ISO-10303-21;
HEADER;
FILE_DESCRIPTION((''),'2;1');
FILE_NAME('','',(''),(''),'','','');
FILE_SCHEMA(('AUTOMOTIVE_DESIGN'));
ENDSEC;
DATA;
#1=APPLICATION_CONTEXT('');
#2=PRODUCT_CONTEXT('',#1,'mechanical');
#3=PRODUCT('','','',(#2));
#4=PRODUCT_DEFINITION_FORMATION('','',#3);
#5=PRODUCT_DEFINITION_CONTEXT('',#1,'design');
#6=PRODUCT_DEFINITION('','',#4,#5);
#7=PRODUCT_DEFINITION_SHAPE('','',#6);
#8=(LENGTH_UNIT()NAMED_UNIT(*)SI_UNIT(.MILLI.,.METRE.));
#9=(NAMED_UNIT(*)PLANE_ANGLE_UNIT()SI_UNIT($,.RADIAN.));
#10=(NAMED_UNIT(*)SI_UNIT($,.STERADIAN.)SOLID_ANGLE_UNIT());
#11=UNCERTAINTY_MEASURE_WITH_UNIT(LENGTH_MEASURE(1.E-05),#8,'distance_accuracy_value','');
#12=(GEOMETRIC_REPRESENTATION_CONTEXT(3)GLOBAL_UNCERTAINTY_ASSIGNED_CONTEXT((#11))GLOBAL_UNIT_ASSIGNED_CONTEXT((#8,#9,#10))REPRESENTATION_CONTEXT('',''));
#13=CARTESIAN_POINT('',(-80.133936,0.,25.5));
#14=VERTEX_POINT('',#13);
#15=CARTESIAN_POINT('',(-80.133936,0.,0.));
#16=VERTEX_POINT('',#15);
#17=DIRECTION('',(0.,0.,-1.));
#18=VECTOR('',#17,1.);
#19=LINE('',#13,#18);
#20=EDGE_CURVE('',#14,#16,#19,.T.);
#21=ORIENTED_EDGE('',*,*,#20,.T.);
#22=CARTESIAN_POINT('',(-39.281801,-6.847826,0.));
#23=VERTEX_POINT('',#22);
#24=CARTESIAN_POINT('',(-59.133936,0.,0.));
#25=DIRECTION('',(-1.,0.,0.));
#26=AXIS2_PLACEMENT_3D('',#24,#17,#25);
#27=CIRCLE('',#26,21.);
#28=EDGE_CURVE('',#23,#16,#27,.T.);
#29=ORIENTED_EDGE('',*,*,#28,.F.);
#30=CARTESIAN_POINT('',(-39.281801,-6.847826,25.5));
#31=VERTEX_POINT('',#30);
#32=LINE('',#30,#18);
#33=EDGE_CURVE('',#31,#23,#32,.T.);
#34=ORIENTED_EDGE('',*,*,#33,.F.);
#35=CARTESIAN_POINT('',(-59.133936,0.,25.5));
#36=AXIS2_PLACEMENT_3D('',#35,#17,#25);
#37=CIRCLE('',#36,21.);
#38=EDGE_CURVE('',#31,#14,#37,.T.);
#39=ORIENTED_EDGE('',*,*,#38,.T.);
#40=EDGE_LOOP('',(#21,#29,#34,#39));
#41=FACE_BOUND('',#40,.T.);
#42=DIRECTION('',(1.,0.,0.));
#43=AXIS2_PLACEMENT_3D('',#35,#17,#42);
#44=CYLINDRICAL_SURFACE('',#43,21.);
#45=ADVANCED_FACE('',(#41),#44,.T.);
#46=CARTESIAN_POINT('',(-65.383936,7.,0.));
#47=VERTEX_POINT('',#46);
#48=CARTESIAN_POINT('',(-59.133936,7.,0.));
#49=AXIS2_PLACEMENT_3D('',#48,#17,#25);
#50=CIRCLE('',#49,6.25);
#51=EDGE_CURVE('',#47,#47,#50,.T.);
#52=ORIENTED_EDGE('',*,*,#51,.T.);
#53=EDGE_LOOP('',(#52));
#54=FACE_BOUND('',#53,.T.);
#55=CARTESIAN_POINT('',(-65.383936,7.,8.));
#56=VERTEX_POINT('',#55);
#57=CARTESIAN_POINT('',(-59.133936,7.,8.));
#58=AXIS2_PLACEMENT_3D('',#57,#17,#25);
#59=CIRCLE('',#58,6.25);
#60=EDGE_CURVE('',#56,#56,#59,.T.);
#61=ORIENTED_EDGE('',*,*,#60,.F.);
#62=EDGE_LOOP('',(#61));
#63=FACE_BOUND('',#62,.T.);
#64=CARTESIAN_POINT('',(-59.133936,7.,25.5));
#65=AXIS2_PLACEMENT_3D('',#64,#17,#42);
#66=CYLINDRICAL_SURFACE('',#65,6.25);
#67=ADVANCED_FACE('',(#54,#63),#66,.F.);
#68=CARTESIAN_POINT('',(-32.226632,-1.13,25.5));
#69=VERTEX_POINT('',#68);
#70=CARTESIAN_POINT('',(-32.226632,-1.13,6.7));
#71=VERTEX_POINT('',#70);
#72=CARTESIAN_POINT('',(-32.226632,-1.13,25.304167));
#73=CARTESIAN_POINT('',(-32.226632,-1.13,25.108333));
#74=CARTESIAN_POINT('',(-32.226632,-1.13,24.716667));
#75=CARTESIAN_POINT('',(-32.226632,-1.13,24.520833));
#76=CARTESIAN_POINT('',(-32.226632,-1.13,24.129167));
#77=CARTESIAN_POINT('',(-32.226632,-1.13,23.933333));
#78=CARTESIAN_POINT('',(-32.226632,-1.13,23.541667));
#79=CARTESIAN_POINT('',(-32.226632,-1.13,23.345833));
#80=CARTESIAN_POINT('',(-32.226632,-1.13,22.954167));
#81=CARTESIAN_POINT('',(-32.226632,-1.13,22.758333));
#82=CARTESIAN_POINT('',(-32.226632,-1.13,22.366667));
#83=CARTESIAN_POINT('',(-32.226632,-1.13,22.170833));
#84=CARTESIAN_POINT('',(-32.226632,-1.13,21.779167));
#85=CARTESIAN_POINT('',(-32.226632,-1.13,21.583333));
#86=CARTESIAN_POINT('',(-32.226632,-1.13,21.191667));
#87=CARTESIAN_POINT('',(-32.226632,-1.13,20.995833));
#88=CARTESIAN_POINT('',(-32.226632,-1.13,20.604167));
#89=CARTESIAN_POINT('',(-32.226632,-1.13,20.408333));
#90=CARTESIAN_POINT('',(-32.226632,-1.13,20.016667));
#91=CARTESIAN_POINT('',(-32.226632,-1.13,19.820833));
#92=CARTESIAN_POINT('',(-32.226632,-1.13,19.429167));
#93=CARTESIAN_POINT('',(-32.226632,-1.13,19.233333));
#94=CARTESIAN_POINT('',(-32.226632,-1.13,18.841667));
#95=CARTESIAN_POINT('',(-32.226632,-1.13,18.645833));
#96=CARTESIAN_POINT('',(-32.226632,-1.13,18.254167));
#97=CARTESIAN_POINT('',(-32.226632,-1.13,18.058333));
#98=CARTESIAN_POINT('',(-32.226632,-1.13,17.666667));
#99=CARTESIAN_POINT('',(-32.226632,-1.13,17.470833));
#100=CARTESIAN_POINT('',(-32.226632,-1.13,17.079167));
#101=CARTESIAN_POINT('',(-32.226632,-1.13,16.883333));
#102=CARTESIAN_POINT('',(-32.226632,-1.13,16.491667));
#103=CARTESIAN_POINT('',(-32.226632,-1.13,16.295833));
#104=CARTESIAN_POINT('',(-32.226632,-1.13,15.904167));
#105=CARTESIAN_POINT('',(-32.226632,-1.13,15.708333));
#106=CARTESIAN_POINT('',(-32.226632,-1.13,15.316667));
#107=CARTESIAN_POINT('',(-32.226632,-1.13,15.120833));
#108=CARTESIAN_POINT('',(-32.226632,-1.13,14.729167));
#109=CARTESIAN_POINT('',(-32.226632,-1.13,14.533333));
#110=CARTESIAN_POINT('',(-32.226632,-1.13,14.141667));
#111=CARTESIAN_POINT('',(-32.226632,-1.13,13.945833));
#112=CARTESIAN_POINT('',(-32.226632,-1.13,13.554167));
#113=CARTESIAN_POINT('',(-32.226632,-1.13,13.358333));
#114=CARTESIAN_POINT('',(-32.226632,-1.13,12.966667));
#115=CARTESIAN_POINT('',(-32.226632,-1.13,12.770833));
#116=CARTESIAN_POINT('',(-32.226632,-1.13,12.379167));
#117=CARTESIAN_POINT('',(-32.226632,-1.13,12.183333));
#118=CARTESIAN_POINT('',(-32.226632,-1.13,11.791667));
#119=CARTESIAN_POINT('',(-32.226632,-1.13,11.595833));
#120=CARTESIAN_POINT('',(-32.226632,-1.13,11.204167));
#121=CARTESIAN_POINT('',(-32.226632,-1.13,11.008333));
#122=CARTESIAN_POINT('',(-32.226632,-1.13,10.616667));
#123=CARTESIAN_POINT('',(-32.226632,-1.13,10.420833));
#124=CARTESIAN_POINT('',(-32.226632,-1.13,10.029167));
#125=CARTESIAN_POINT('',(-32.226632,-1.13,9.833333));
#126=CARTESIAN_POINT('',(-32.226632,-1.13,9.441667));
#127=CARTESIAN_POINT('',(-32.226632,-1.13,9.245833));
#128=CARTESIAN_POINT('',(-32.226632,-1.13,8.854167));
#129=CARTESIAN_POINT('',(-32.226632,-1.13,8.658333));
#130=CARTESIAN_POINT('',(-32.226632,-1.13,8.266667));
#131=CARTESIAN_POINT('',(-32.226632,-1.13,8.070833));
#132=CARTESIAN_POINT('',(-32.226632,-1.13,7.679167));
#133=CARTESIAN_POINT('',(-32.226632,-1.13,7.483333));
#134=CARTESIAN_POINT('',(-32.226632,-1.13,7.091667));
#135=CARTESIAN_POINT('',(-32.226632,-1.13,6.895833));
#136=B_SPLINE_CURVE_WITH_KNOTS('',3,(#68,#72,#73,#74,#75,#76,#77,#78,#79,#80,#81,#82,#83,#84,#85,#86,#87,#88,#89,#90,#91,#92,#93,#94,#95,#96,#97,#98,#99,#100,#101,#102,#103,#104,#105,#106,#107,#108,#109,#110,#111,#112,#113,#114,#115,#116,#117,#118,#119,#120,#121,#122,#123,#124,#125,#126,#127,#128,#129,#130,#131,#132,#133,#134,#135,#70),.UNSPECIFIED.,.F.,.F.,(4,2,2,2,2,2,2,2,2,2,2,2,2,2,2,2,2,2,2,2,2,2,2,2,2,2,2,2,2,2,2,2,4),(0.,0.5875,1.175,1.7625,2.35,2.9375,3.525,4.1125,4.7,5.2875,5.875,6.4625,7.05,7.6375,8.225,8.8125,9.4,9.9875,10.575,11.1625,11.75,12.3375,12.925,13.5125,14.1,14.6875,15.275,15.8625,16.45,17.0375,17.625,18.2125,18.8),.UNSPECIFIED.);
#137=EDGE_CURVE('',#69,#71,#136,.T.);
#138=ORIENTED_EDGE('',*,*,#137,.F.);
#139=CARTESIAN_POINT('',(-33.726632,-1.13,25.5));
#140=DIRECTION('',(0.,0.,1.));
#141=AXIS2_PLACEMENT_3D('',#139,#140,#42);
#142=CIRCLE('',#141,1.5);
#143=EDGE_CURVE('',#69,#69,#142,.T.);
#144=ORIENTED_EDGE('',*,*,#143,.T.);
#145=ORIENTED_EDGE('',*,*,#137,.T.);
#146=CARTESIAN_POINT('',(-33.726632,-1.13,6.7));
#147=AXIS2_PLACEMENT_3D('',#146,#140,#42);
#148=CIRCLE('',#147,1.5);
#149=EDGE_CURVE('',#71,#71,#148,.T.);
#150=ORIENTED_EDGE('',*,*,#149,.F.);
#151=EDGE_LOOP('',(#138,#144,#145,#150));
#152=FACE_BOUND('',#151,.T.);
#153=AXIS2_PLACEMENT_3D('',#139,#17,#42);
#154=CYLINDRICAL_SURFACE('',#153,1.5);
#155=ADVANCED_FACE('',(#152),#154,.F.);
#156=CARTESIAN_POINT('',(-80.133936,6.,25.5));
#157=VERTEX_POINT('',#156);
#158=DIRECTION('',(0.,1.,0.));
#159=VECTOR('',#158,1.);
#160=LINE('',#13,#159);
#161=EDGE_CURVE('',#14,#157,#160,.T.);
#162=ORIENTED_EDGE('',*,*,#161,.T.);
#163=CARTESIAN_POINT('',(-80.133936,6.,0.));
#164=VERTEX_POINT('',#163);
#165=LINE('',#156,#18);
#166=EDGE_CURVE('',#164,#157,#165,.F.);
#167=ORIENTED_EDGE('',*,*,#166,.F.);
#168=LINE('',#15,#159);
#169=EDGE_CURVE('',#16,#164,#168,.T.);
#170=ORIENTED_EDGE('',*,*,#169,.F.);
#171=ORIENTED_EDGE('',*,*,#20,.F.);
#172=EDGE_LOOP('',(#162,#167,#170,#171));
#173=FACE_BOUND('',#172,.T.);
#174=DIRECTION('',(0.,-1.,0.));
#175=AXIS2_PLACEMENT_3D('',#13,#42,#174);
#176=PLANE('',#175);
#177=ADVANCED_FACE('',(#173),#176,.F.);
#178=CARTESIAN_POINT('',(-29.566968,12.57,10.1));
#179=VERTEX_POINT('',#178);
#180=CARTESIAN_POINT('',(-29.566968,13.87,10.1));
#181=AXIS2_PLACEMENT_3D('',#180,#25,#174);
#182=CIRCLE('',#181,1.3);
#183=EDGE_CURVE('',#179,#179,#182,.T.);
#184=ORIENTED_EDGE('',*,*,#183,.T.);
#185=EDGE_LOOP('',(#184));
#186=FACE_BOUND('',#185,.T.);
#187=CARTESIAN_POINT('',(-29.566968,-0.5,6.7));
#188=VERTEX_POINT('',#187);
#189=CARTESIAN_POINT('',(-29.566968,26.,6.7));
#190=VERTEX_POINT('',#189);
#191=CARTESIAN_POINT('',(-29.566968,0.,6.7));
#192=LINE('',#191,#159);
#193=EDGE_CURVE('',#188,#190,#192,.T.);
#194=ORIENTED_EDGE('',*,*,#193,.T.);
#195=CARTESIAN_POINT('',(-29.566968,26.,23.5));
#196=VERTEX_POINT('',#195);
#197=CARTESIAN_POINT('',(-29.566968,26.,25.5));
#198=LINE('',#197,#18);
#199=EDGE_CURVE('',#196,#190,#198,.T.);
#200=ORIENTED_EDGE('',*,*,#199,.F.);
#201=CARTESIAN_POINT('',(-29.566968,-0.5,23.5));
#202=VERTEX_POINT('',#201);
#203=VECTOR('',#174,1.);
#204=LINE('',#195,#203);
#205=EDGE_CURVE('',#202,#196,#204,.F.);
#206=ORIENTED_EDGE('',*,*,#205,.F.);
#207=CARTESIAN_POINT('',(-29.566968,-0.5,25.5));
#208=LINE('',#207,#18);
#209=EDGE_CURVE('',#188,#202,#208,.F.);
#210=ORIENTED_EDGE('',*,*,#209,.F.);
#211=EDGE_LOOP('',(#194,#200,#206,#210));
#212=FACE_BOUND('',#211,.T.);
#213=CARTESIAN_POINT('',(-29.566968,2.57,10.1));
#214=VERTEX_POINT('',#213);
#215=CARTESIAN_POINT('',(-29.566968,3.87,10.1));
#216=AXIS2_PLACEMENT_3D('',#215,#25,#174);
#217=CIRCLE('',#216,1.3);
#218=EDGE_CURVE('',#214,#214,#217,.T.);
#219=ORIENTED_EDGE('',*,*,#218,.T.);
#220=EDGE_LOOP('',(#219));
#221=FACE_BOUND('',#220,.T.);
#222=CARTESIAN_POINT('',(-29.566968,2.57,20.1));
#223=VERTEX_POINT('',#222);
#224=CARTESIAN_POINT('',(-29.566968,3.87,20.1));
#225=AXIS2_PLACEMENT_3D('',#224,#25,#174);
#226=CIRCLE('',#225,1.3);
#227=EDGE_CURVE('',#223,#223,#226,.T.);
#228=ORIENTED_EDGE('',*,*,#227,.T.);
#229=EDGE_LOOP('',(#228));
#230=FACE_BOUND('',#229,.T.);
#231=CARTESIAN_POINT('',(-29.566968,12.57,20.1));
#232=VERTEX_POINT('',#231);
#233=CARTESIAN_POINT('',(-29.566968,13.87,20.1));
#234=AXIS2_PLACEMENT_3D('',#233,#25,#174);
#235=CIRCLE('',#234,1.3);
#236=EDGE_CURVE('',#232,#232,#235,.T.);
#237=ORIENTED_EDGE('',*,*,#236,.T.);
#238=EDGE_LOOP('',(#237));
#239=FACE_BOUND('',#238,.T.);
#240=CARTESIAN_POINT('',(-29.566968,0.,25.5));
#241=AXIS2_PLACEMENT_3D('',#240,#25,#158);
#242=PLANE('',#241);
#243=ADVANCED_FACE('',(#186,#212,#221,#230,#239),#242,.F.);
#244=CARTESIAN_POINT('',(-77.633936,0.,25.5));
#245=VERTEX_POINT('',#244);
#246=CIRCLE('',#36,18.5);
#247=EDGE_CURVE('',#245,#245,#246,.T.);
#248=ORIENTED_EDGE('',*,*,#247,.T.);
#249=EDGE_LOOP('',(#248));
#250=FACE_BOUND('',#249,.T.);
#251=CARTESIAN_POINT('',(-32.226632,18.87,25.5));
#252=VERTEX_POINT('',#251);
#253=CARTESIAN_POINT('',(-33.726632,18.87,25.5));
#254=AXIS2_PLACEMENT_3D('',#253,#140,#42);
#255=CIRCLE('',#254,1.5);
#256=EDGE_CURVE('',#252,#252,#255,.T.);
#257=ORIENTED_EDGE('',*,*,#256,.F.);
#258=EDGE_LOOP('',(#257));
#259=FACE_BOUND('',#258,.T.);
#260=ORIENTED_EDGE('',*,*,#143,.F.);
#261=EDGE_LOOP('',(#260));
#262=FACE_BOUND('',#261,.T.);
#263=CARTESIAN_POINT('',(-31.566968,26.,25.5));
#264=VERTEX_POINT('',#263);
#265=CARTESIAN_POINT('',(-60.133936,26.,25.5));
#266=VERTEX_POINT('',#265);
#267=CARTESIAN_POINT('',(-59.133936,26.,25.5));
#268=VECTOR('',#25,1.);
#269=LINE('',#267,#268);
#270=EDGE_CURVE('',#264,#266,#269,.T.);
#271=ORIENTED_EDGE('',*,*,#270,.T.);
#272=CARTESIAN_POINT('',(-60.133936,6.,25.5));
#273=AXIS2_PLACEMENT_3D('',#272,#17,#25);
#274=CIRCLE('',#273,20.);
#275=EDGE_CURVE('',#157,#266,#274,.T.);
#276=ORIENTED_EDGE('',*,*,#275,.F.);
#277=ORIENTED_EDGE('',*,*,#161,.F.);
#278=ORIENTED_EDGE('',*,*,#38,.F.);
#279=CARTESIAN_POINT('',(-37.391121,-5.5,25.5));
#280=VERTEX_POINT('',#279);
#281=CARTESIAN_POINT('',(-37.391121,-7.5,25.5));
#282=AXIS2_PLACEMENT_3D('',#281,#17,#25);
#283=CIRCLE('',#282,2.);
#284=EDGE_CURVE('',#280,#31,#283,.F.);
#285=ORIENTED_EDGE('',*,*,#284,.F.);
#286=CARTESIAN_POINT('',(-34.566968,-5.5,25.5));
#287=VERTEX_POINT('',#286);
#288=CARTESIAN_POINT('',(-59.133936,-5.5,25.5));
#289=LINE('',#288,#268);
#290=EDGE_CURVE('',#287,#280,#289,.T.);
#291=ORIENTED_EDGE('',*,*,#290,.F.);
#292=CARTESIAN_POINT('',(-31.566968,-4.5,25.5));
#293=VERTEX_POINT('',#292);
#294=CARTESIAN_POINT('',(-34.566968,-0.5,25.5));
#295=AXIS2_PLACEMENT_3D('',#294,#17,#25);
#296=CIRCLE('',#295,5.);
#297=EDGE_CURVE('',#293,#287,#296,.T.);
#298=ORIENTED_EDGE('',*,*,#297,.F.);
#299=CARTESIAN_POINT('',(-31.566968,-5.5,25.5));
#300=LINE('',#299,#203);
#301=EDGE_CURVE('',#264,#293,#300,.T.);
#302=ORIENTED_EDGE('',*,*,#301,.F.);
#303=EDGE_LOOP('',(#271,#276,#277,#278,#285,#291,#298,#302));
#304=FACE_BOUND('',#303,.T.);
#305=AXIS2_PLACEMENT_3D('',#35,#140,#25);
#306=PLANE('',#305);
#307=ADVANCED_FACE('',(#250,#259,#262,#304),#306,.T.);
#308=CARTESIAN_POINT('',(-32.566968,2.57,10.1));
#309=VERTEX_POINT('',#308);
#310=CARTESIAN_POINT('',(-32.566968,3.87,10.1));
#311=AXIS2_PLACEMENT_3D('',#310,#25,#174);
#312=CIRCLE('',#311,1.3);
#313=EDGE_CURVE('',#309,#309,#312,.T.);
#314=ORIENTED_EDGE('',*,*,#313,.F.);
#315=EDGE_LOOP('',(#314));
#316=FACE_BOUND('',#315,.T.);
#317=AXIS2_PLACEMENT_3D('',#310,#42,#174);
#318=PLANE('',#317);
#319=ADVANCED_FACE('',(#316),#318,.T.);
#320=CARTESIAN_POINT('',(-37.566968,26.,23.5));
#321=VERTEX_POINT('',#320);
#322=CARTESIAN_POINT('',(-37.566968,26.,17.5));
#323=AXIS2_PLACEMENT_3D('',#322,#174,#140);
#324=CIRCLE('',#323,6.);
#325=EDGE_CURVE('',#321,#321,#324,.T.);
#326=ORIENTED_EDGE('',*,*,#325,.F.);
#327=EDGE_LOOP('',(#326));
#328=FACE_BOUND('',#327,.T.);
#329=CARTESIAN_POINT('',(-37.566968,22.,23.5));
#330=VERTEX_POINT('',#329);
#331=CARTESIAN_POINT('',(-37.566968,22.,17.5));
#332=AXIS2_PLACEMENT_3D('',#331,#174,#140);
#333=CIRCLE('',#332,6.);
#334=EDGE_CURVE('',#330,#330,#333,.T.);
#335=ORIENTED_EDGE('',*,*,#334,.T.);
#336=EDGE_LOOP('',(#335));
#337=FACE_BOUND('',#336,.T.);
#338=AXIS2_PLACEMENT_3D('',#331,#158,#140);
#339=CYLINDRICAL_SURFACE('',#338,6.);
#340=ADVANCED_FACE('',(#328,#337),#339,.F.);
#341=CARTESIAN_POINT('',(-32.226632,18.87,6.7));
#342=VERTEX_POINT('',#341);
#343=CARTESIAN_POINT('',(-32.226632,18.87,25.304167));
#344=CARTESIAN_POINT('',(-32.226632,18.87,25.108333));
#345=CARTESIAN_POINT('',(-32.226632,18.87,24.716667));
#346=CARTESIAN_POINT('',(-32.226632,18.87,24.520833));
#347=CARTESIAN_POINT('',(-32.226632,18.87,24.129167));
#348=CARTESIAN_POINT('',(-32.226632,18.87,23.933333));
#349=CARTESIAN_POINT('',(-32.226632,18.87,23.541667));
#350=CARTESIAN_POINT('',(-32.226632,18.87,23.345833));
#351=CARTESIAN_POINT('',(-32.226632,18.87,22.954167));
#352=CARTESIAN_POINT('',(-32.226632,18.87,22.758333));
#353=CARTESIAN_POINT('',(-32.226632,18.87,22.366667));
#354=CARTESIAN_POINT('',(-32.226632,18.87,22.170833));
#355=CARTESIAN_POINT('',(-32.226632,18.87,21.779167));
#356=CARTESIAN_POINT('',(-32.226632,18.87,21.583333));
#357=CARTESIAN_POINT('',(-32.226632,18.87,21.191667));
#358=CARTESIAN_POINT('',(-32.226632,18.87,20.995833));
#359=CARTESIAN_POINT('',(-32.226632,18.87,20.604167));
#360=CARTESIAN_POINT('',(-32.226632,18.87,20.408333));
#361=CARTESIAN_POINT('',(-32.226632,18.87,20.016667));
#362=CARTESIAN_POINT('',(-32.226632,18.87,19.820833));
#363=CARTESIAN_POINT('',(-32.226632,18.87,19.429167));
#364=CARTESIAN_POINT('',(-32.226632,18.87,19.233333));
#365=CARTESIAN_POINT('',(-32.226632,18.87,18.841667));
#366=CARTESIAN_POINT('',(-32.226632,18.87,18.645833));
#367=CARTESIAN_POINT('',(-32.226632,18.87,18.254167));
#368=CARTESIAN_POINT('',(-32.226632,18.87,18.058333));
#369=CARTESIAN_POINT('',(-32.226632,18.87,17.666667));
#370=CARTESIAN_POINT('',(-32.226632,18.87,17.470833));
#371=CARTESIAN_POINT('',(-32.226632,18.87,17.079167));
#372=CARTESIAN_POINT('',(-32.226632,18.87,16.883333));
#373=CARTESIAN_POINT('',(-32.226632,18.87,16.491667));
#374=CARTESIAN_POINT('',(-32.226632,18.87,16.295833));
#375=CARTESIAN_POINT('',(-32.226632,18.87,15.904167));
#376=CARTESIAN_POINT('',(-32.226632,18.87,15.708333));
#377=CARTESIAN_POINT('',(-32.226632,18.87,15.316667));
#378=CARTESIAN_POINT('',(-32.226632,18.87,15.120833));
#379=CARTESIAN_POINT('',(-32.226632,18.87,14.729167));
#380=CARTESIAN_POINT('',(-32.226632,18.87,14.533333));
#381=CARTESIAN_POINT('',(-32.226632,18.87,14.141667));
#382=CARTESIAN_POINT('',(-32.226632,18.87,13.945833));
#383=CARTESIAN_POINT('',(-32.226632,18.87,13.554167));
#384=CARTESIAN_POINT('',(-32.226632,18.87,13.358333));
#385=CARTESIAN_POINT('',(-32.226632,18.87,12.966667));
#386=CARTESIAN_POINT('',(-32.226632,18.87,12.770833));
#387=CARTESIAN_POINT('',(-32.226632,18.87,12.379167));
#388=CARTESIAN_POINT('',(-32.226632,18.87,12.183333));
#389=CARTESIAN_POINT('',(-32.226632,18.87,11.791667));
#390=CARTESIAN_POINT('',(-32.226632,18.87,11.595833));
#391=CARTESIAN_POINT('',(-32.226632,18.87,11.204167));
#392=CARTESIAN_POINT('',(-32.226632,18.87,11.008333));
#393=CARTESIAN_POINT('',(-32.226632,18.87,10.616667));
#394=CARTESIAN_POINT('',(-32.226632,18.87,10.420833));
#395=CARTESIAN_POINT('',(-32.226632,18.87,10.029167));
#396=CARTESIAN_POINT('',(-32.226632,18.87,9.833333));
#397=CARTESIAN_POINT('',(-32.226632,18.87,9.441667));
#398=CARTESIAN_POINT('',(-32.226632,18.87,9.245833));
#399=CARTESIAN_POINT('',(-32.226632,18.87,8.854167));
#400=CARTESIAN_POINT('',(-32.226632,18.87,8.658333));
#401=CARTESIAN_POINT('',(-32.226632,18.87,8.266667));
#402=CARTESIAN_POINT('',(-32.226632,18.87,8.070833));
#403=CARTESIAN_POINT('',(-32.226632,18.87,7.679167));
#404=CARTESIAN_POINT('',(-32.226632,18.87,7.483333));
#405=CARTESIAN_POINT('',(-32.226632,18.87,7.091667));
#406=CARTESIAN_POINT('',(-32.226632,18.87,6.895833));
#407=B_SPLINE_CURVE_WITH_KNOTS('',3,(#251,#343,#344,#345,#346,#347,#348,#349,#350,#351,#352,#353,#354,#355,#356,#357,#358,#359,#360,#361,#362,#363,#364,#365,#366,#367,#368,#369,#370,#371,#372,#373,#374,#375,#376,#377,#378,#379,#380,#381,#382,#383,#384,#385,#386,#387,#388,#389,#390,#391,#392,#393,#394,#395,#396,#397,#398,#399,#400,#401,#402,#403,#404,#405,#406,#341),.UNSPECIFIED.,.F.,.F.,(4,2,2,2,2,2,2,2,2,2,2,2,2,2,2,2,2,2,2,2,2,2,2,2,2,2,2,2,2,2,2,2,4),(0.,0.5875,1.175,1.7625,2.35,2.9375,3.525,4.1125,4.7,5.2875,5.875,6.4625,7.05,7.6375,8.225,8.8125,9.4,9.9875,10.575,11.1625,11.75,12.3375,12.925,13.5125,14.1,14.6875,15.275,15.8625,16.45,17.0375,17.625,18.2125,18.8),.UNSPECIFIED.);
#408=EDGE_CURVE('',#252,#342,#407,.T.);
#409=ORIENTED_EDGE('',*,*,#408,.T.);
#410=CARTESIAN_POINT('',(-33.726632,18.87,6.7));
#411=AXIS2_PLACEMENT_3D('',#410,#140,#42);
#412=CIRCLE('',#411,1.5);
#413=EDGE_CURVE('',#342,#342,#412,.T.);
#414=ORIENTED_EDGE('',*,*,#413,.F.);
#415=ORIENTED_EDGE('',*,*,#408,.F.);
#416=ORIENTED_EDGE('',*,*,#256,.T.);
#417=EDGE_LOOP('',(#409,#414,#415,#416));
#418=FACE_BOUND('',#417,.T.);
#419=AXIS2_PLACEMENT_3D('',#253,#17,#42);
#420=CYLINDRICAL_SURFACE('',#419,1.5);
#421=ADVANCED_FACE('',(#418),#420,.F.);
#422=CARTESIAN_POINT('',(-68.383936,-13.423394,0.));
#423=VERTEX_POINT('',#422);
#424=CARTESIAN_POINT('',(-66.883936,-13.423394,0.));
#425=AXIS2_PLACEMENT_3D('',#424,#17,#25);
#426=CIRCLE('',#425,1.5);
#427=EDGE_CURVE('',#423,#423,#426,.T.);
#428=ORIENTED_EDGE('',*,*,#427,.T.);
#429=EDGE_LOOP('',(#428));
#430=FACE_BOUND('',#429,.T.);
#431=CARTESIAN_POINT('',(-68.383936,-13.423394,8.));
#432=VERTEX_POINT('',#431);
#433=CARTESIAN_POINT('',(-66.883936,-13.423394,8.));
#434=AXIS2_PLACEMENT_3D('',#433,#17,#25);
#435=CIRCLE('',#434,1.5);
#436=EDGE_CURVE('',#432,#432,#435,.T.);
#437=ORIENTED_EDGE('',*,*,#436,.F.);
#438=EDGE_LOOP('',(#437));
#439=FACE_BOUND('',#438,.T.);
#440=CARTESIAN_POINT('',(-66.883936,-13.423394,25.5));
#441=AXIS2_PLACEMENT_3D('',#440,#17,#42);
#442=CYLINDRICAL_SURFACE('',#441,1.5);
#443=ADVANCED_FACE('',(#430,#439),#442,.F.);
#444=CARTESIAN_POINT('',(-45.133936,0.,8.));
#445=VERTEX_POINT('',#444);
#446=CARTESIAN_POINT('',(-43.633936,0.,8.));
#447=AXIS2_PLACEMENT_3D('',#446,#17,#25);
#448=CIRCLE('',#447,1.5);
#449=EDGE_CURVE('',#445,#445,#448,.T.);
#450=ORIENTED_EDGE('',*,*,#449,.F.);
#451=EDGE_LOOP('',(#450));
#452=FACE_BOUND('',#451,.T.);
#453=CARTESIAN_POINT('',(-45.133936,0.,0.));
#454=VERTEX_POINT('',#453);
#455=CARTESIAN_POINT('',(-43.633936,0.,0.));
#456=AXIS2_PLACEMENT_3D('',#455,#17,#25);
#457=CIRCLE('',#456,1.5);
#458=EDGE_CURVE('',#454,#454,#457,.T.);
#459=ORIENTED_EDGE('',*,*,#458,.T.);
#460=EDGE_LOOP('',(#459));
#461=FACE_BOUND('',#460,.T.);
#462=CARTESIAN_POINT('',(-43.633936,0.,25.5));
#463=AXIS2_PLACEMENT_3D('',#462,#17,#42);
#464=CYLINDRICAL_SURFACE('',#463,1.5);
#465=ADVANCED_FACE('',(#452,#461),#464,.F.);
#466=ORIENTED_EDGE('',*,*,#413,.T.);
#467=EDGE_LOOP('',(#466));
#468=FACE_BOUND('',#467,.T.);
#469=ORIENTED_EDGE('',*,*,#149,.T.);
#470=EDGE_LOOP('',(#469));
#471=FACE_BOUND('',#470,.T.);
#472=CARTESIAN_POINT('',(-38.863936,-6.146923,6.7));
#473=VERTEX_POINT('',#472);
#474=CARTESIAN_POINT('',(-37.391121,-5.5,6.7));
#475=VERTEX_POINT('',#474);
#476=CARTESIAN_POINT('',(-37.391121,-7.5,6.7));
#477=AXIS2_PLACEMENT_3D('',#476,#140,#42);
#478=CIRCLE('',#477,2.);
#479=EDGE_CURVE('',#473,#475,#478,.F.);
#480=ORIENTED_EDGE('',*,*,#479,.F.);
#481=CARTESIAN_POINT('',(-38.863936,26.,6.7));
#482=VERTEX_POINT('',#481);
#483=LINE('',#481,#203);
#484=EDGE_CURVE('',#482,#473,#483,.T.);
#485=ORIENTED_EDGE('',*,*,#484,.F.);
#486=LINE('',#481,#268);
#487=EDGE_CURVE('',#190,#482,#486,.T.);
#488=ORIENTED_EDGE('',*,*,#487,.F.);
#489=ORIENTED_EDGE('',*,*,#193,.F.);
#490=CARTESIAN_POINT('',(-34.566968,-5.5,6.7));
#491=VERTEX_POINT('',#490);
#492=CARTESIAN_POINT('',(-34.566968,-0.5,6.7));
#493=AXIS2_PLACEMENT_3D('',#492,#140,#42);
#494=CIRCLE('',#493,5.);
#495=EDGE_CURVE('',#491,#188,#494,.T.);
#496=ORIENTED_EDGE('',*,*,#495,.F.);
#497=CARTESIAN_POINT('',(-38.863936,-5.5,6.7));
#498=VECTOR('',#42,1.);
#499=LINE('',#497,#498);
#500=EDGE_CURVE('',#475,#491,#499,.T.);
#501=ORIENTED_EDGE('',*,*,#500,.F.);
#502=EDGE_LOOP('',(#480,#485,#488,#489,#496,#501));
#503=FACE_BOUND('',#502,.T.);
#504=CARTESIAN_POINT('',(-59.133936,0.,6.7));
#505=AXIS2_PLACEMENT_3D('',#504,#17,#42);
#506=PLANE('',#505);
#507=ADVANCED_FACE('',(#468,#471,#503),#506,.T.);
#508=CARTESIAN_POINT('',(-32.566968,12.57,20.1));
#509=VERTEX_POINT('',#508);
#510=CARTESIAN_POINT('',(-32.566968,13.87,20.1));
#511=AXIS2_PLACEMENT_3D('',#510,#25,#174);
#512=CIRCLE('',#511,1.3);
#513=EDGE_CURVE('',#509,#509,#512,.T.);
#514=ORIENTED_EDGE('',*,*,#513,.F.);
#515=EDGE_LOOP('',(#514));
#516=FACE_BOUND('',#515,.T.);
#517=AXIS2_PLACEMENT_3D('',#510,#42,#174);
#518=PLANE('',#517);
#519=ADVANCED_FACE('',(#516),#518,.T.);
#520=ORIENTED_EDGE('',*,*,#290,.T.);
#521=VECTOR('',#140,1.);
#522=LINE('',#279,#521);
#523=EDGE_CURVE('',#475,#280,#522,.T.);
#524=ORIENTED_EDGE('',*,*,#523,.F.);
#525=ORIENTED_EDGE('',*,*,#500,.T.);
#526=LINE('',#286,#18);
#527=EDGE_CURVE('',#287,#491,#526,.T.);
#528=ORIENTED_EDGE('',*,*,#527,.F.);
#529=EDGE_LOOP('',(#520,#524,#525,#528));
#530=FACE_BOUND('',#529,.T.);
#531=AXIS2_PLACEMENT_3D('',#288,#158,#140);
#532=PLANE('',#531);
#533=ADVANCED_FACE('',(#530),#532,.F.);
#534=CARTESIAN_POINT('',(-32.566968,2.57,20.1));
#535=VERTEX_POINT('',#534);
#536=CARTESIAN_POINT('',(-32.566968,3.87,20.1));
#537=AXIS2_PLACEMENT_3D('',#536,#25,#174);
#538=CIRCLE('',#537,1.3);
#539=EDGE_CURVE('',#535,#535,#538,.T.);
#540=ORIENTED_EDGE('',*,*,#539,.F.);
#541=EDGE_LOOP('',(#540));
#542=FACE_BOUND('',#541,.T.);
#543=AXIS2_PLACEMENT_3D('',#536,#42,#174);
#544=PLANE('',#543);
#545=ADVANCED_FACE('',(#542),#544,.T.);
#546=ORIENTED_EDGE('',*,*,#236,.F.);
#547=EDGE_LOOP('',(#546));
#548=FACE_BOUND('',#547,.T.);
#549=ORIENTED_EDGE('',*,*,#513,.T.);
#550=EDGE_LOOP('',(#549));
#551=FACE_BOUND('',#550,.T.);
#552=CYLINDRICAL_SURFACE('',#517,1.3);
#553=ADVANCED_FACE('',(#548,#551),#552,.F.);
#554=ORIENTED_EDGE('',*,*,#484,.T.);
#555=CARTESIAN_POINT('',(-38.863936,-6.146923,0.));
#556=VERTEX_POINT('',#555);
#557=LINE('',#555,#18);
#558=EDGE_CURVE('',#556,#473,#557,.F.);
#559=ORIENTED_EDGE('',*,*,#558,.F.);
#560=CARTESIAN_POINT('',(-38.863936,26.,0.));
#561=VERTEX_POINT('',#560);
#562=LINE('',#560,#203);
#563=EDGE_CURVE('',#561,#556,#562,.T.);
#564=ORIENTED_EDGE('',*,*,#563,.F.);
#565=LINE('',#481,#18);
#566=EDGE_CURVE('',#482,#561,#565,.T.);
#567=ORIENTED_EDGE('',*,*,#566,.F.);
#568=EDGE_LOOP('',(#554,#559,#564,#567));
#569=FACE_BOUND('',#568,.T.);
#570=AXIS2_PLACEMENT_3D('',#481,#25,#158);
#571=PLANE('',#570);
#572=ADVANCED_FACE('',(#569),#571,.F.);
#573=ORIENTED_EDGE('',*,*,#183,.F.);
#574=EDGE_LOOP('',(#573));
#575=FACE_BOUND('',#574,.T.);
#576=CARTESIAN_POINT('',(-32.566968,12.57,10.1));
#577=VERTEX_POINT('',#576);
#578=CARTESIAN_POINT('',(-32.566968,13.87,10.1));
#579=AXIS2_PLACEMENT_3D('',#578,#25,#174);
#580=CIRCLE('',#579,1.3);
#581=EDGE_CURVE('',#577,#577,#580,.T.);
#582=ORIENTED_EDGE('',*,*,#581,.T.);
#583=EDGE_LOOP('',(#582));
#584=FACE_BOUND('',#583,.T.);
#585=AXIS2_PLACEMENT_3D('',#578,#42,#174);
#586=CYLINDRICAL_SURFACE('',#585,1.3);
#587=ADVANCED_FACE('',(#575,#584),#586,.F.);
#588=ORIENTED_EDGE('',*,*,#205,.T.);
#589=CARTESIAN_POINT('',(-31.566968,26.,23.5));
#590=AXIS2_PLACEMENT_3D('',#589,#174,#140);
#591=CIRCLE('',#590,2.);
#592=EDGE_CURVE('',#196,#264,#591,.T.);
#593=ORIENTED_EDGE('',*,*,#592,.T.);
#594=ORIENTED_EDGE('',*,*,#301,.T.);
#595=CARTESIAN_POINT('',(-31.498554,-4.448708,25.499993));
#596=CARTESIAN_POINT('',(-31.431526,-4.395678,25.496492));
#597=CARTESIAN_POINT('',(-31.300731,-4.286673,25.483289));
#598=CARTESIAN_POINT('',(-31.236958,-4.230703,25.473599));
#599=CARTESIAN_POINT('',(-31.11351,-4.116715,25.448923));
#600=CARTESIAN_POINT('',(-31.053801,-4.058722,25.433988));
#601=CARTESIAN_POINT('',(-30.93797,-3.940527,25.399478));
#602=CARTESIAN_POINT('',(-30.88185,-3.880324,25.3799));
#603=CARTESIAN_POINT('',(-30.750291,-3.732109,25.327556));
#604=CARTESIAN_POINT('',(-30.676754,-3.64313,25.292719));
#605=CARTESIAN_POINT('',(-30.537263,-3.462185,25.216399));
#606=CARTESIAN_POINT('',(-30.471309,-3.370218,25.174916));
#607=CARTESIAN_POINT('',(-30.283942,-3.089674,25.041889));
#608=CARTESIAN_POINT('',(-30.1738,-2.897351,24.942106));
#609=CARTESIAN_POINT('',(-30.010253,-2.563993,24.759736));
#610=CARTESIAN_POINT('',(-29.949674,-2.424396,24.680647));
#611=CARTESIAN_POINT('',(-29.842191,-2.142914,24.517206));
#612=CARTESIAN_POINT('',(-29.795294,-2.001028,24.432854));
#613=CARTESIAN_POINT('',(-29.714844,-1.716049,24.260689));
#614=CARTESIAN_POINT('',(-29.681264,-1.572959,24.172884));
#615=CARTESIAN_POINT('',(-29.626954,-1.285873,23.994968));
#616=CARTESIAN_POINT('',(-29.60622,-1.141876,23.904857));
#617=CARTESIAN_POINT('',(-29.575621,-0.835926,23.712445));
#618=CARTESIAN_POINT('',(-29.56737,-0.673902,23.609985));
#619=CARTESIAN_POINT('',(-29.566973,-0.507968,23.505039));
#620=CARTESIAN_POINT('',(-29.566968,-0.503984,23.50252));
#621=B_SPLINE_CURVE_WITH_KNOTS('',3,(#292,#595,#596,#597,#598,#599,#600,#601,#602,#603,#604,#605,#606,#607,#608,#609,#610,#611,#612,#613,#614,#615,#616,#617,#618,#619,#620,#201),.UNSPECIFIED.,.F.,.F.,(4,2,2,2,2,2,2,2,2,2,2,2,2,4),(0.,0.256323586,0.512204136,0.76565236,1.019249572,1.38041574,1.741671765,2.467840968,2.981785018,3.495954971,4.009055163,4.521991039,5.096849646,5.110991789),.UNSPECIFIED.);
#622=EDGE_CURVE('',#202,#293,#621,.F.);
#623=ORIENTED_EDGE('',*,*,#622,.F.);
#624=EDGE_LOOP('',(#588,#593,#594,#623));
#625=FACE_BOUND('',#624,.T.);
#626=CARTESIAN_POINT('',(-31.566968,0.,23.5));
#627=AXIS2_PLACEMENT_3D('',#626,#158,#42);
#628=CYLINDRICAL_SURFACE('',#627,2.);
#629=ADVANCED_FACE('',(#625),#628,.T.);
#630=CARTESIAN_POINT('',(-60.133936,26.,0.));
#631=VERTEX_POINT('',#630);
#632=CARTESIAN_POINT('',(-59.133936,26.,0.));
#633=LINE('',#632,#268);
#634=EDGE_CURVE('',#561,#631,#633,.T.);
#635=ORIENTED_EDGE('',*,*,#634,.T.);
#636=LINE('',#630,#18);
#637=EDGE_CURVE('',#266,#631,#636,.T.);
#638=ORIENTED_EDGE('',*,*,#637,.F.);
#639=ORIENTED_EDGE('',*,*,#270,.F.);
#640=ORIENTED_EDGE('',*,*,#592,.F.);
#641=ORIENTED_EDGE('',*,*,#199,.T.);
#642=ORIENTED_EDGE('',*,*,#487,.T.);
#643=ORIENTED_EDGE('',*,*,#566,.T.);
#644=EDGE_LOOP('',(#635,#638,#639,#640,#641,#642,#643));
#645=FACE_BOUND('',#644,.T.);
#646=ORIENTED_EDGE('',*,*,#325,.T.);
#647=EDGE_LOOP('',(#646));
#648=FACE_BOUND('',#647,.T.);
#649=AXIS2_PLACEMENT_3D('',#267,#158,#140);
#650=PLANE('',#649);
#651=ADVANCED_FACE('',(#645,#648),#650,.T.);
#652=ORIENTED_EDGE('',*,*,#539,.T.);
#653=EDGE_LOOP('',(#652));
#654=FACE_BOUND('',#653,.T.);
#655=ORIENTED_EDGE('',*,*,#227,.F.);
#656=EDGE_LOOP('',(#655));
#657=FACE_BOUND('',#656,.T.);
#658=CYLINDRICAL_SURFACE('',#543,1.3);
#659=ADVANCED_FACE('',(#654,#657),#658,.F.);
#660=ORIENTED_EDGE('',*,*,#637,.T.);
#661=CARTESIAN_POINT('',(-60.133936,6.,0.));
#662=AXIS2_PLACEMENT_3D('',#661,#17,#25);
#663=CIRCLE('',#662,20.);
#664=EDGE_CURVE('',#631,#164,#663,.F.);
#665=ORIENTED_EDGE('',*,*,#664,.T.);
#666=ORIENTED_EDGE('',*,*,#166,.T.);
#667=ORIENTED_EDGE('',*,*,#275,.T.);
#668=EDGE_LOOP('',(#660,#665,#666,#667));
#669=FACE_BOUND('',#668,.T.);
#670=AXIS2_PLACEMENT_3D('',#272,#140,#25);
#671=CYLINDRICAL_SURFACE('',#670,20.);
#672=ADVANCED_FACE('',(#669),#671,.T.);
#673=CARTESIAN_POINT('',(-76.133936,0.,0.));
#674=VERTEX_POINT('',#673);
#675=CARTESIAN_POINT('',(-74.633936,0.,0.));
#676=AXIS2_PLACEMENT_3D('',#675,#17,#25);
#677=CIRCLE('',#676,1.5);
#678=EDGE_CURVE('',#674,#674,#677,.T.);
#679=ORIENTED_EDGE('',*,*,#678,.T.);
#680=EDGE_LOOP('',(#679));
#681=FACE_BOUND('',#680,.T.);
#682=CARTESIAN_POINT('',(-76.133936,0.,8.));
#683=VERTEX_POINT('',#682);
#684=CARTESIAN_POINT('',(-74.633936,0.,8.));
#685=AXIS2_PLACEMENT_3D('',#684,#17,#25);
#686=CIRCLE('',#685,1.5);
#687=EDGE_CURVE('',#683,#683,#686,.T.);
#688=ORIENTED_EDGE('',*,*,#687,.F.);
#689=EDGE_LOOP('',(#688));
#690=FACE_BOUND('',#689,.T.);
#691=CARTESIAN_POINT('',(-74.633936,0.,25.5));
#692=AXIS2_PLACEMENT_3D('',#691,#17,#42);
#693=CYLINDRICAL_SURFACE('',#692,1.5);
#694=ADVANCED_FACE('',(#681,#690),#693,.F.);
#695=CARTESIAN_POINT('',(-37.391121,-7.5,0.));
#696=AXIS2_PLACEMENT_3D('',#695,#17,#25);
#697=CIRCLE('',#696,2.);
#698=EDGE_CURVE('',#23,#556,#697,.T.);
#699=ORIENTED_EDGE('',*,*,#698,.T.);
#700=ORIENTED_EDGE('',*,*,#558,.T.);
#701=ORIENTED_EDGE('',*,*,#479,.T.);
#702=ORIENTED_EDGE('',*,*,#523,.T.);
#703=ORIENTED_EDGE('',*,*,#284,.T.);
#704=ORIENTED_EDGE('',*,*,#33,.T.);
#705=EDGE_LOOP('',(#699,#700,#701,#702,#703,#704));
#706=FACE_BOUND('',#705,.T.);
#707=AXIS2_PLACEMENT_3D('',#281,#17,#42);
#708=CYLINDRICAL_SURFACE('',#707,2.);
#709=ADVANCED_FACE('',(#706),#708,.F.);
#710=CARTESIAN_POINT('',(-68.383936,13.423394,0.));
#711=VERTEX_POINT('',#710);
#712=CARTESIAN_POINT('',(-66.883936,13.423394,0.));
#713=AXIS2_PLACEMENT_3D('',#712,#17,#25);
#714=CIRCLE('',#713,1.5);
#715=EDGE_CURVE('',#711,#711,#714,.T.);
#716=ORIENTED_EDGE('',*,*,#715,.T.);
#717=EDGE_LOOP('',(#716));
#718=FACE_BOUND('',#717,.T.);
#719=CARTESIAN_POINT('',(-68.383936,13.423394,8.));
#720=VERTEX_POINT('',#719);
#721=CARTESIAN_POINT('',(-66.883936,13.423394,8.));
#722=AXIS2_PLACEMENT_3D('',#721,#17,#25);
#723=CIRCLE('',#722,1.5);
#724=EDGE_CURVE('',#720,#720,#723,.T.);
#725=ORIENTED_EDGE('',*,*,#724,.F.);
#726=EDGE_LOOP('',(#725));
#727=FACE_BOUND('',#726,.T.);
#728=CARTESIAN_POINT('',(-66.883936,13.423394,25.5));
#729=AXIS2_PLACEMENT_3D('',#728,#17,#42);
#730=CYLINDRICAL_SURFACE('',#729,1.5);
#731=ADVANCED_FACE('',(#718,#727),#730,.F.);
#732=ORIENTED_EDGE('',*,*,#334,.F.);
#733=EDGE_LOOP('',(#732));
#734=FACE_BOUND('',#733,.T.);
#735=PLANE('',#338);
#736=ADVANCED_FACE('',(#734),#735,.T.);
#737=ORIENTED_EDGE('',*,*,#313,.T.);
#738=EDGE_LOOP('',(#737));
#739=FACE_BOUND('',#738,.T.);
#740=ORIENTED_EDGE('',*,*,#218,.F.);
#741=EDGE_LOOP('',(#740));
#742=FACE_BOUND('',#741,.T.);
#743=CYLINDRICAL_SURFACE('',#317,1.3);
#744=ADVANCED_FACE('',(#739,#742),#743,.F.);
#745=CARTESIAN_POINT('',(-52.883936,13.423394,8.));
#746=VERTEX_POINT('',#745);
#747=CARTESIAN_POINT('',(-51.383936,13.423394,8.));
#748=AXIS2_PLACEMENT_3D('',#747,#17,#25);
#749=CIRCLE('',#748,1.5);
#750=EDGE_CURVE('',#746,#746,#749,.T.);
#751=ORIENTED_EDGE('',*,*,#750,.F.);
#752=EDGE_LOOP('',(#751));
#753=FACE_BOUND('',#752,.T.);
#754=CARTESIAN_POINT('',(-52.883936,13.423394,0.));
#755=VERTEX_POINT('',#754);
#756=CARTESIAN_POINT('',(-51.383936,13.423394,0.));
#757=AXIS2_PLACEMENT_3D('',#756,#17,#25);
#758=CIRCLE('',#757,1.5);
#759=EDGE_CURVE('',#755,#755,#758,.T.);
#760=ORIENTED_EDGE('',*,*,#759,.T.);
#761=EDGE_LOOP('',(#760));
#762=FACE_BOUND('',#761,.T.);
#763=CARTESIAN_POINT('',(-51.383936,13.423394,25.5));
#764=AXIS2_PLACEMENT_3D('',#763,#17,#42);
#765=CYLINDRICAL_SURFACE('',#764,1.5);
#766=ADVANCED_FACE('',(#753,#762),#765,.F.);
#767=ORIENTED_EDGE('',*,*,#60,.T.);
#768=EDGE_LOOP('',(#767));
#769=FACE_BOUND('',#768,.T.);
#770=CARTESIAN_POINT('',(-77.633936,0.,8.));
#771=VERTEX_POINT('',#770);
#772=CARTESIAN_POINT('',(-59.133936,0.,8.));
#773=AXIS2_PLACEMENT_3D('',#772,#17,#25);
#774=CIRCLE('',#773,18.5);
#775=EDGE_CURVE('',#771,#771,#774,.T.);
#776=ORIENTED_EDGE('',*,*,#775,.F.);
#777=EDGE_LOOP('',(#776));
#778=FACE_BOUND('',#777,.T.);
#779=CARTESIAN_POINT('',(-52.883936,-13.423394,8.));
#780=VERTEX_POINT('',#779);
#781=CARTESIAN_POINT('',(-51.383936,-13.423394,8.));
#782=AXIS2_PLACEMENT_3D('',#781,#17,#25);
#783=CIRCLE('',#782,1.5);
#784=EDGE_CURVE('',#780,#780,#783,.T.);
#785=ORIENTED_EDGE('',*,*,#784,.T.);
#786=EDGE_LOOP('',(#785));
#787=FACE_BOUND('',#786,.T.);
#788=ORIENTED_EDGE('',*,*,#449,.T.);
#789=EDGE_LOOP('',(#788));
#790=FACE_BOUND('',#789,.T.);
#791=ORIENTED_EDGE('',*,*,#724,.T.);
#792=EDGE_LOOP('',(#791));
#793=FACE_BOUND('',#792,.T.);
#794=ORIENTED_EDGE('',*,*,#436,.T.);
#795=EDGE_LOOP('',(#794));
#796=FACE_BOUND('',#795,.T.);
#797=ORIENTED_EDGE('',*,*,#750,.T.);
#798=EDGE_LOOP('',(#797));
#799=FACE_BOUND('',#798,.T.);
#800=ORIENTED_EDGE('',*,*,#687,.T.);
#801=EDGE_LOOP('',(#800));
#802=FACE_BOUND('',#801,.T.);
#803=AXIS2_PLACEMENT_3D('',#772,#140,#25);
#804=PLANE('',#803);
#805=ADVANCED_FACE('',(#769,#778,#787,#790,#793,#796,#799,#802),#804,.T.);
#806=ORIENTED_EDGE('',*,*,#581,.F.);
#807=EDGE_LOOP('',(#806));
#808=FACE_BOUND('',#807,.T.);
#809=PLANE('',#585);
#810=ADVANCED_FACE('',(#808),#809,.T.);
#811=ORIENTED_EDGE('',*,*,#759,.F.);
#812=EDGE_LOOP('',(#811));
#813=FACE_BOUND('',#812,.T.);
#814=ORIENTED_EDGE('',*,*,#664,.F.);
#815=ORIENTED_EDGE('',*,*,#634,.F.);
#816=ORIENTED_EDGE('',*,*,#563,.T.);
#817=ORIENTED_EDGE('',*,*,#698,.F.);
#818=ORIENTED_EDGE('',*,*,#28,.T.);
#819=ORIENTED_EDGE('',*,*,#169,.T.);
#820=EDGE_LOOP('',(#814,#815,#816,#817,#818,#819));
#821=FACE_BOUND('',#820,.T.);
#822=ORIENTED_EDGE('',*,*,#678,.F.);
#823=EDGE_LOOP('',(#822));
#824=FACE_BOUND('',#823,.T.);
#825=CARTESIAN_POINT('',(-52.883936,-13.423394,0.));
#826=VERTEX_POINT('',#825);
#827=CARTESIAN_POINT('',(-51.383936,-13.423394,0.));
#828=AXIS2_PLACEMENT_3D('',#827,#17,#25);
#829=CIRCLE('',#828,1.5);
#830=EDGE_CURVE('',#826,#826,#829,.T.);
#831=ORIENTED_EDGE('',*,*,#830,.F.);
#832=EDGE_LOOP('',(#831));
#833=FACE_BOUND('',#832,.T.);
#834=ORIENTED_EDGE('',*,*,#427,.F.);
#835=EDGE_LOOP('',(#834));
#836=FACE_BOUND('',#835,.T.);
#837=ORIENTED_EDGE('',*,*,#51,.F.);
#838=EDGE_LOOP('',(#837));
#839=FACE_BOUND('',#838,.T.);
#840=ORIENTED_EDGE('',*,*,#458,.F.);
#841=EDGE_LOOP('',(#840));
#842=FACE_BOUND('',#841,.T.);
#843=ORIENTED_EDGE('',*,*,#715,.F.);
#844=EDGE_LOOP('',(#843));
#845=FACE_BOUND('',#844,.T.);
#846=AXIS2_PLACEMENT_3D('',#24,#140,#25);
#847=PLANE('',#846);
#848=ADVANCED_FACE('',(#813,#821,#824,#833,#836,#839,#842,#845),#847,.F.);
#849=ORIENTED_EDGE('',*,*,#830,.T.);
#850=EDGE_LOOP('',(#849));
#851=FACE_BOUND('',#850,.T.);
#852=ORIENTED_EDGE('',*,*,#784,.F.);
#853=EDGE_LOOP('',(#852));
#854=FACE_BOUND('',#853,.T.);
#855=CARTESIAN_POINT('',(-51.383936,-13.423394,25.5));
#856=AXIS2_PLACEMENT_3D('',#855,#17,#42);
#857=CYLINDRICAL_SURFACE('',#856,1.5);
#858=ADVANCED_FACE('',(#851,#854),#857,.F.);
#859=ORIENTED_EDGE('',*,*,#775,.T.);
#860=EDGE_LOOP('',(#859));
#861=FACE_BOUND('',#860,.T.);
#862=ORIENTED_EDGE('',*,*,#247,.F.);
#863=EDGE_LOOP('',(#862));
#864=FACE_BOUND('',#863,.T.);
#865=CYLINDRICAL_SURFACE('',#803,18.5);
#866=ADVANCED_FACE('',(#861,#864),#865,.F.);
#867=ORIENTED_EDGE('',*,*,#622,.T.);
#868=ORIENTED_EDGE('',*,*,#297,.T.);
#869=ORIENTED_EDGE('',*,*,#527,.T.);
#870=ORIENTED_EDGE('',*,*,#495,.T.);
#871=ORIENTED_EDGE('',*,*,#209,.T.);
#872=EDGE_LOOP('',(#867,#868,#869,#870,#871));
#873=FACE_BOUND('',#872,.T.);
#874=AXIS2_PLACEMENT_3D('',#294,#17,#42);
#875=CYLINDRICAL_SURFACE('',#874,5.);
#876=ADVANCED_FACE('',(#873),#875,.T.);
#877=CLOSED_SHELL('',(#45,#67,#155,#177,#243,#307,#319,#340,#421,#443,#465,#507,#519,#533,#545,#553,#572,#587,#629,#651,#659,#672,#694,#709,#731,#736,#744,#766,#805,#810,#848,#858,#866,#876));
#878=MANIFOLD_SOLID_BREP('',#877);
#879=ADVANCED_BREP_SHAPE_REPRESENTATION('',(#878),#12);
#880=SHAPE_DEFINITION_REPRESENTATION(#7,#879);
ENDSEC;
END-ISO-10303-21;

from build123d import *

# Parameters (mm, degrees)
SKETCH_1_R                = 1.5
SKETCH_1_R_2              = 6.25
EXTRUDE_1_DEPTH           = 25.5
SKETCH_2_R                = 18.5
CUT_EXTRUDE_1_DEPTH       = 17.5
SKETCH_3_W                = 9.3
SKETCH_3_H                = 31.5
CUT_EXTRUDE_2_DEPTH       = 6.7
FILLET_1_R                = 20
SKETCH_4_R                = 1.5
CUT_EXTRUDE_3_DEPTH       = 44.630787393
FILLET_3_R                = 2
FILLET_4_R                = 2
FILLET_5_R                = 5
SKETCH_5_R                = 6
CUT_EXTRUDE_4_DEPTH       = 4
SKETCH_6_R                = 1.3
CUT_EXTRUDE_5_DEPTH       = 3
MOVE_BODY_1_OUTLINE_R     = 1.5
MOVE_BODY_1_OUTLINE_R_2   = 6.25
MOVE_BODY_1_DEPTH         = 25.5
MOVE_START                = 6.7
MOVE_BODY_1_2_OUTLINE_R   = 1.5
MOVE_BODY_1_2_OUTLINE_R_2 = 18.5
MOVE_BODY_1_2_DEPTH       = 18.8
MOVE_BODY_1_3_OUTLINE_R   = 1.5
MOVE_BODY_1_3_OUTLINE_R_2 = 6.25
MOVE_BODY_1_3_DEPTH       = 8
MOVE_START_2              = -29.5669682
MOVE_BODY_1_4_OUTLINE_W   = 31.5
MOVE_BODY_1_4_OUTLINE_H   = 18.8
MOVE_BODY_1_4_DEPTH       = 9.2969682
MOVE_START_3              = -32.5669682
MOVE_BODY_1_5_OUTLINE_R   = 1.3
MOVE_BODY_1_5_DEPTH       = 3
MOVE_START_4              = -21
MOVE_BODY_1_6_DEPTH       = 47
MOVE_START_5              = 22
MOVE_BODY_1_7_OUTLINE_R   = 6
MOVE_BODY_1_7_DEPTH       = 4


with BuildPart() as part:
    # 草图1 → 凸台-拉伸1 (new body)
    with BuildSketch(Plane.XY):
        with BuildLine():
            Line((21, 0), (21, 26))
            Line((21, 26), (-29.5669682, 26))
            Line((-29.5669682, 26), (-29.5669682, -5.5))
            Line((-29.5669682, -5.5), (-20.2669682, -5.5))
            ThreePointArc((-20.2669682, -5.5), (2.774316836, -20.815935388), (21, 0))
        make_face()
        with Locations((15.5, 0)):
            Circle(SKETCH_1_R, mode=Mode.SUBTRACT)
        with Locations((-15.5, 0)):
            Circle(SKETCH_1_R, mode=Mode.SUBTRACT)
        with Locations((-7.75, 13.423393759)):
            Circle(SKETCH_1_R, mode=Mode.SUBTRACT)
        with Locations((7.75, 13.423393759)):
            Circle(SKETCH_1_R, mode=Mode.SUBTRACT)
        with Locations((7.75, -13.423393759)):
            Circle(SKETCH_1_R, mode=Mode.SUBTRACT)
        with Locations((-7.75, -13.423393759)):
            Circle(SKETCH_1_R, mode=Mode.SUBTRACT)
        with Locations((0, 7)):
            Circle(SKETCH_1_R_2, mode=Mode.SUBTRACT)
    extrude(amount=EXTRUDE_1_DEPTH)

    # 草图2 → 切除-拉伸1 (cut)
    with BuildSketch(Plane.XY.offset(25.5)):
        Circle(SKETCH_2_R)
    extrude(amount=-CUT_EXTRUDE_1_DEPTH, mode=Mode.SUBTRACT)

    # 草图3 → 切除-拉伸2 (cut)
    with BuildSketch(Plane(origin=(0, 0, 0), x_dir=(-1, 0, 0), z_dir=(0, 0, -1))):
        with Locations((24.92, 10.25)):
            Rectangle(SKETCH_3_W, SKETCH_3_H)
    extrude(amount=-CUT_EXTRUDE_2_DEPTH, mode=Mode.SUBTRACT)

    # 圆角1
    fillet_1_edges = [part.edges().sort_by_distance(p)[0] for p in [
        (21, 26, 12.75),
    ]]
    fillet(fillet_1_edges, radius=FILLET_1_R)

    # 草图4 → 切除-拉伸3 (cut, through all)
    with BuildSketch(Plane(origin=(0, 0, 6.7), x_dir=(-1, 0, 0), z_dir=(0, 0, -1))):
        with Locations((25.407304845, 18.87)):
            Circle(SKETCH_4_R)
        with Locations((25.407304845, -1.13)):
            Circle(SKETCH_4_R)
    extrude(amount=-CUT_EXTRUDE_3_DEPTH, mode=Mode.SUBTRACT)

    # 圆角3
    fillet_3_edges = [part.edges().sort_by_distance(p)[0] for p in [
        (-29.5669682, 10.25, 25.5),
    ]]
    fillet(fillet_3_edges, radius=FILLET_3_R)

    # 圆角4
    fillet_4_edges = [part.edges().sort_by_distance(p)[0] for p in [
        (-20.2669682, -5.5, 12.75),
    ]]
    fillet(fillet_4_edges, radius=FILLET_4_R)

    # 圆角5
    # the kernel refuses this fillet: 5 mm, written as the material it takes off along each edge
    with BuildSketch(Plane(origin=(-29.5669682, -5.5, -5.8), x_dir=(1, 0, 0), z_dir=(0, 0, 1))) as fillet_5_piece_1:
        with BuildLine():
            CenterArc((FILLET_5_R, FILLET_5_R), FILLET_5_R, 180, 90)
            Line((0, FILLET_5_R), (0, 0))
            Line((0, 0), (FILLET_5_R, 0))
        make_face()
    extrude(amount=41.8, mode=Mode.SUBTRACT)

    # 草图5 → 切除-拉伸4 (cut)
    with BuildSketch(Plane(origin=(0, 26, 0), x_dir=(1, 0, 0), z_dir=(0, 1, 0))):
        with Locations(Location((-21.5669682, -17.5, 0), (0, 0, 270))):
            Circle(SKETCH_5_R)
    extrude(amount=-CUT_EXTRUDE_4_DEPTH, mode=Mode.SUBTRACT)

    # 草图6 → 切除-拉伸5 (cut)
    with BuildSketch(Plane.ZY.offset(29.5669682)):
        with Locations(Location((20.1, 13.87, 0), (0, 0, 270))):
            Circle(SKETCH_6_R)
        with Locations(Location((20.1, 3.87, 0), (0, 0, 270))):
            Circle(SKETCH_6_R)
        with Locations(Location((10.1, 3.87, 0), (0, 0, 270))):
            Circle(SKETCH_6_R)
        with Locations(Location((10.1, 13.87, 0), (0, 0, 270))):
            Circle(SKETCH_6_R)
    extrude(amount=-CUT_EXTRUDE_5_DEPTH, mode=Mode.SUBTRACT)

    # Move Body 1: read off the stored shape, not the designer's step
    # Move Body 1 outline → Move Body 1 (cut)
    with BuildSketch(Plane.XY):
        with BuildLine():
            Line((1, 26), (-20.27, 26))
            Line((-20.27, 26), (-20.27, 22))
            Line((-20.27, 22), (-20.27, -6.146923411))
            ThreePointArc((-20.27, -6.146923411), (-20.024941251, -6.475836873), (-19.852135348, -6.847826087))
            ThreePointArc((-19.852135348, -6.847826087), (3.471682423, -20.711045873), (21, 0))
            Line((21, 0), (21, 6))
            ThreePointArc((21, 6), (15.142135624, 20.142135624), (1, 26))
        make_face()
        with Locations((7.75, 13.423393759)):
            Circle(MOVE_BODY_1_OUTLINE_R, mode=Mode.SUBTRACT)
        with Locations((-7.75, -13.423393759)):
            Circle(MOVE_BODY_1_OUTLINE_R, mode=Mode.SUBTRACT)
        with Locations((7.75, -13.423393759)):
            Circle(MOVE_BODY_1_OUTLINE_R, mode=Mode.SUBTRACT)
        with Locations((-15.5, 0)):
            Circle(MOVE_BODY_1_OUTLINE_R, mode=Mode.SUBTRACT)
        with Locations((15.5, 0)):
            Circle(MOVE_BODY_1_OUTLINE_R, mode=Mode.SUBTRACT)
        with Locations((-7.75, 13.423393759)):
            Circle(MOVE_BODY_1_OUTLINE_R, mode=Mode.SUBTRACT)
        with Locations((0, 7)):
            Circle(MOVE_BODY_1_OUTLINE_R_2, mode=Mode.SUBTRACT)
    extrude(amount=MOVE_BODY_1_DEPTH, mode=Mode.SUBTRACT)

    # Move Body 1 2 outline → Move Body 1 2 (add)
    with BuildSketch(Plane.XY.offset(MOVE_START)):
        with BuildLine():
            Line((-20.27, 26), (-60.133936399, 26))
            ThreePointArc((-60.133936399, 26), (-74.276072023, 20.142135624), (-80.133936399, 6))
            Line((-80.133936399, 6), (-80.133936399, 0))
            ThreePointArc((-80.133936399, 0), (-62.605618822, -20.711045873), (-39.281801051, -6.847826087))
            ThreePointArc((-39.281801051, -6.847826087), (-38.552080618, -5.871450365), (-37.391121494, -5.5))
            Line((-37.391121494, -5.5), (-34.5669682, -5.5))
            ThreePointArc((-34.5669682, -5.5), (-31.031434294, -4.035533906), (-29.5669682, -0.5))
            ThreePointArc((-29.5669682, -0.5), (-28.102502106, -4.035533905), (-24.5669682, -5.5))
            Line((-24.5669682, -5.5), (-21.742814905, -5.5))
            ThreePointArc((-21.742814905, -5.5), (-20.938499413, -5.668859211), (-20.27, -6.146923411))
            Line((-20.27, -6.146923411), (-20.27, 22))
            Line((-20.27, 22), (-20.27, 26))
        make_face()
        with Locations((-33.726631554, -1.13)):
            Circle(MOVE_BODY_1_2_OUTLINE_R, mode=Mode.SUBTRACT)
        with Locations((-25.407304845, -1.13)):
            Circle(MOVE_BODY_1_2_OUTLINE_R, mode=Mode.SUBTRACT)
        with Locations((-33.726631554, 18.87)):
            Circle(MOVE_BODY_1_2_OUTLINE_R, mode=Mode.SUBTRACT)
        with Locations((-25.407304845, 18.87)):
            Circle(MOVE_BODY_1_2_OUTLINE_R, mode=Mode.SUBTRACT)
        with Locations((-59.133936399, 0)):
            Circle(MOVE_BODY_1_2_OUTLINE_R_2, mode=Mode.SUBTRACT)
    extrude(amount=MOVE_BODY_1_2_DEPTH)

    # Move Body 1 3 outline → Move Body 1 3 (add)
    with BuildSketch(Plane.XY):
        with BuildLine():
            Line((-38.863936399, 22), (-38.863936399, 26))
            Line((-38.863936399, 26), (-60.133936399, 26))
            ThreePointArc((-60.133936399, 26), (-74.276072023, 20.142135624), (-80.133936399, 6))
            Line((-80.133936399, 6), (-80.133936399, 0))
            ThreePointArc((-80.133936399, 0), (-62.605618822, -20.711045873), (-39.281801051, -6.847826087))
            ThreePointArc((-39.281801051, -6.847826087), (-39.108995148, -6.475836873), (-38.863936399, -6.146923411))
            Line((-38.863936399, -6.146923411), (-38.863936399, 22))
        make_face()
        with Locations((-51.383936399, 13.423393759)):
            Circle(MOVE_BODY_1_3_OUTLINE_R, mode=Mode.SUBTRACT)
        with Locations((-66.883936399, -13.423393759)):
            Circle(MOVE_BODY_1_3_OUTLINE_R, mode=Mode.SUBTRACT)
        with Locations((-51.383936399, -13.423393759)):
            Circle(MOVE_BODY_1_3_OUTLINE_R, mode=Mode.SUBTRACT)
        with Locations((-74.633936399, 0)):
            Circle(MOVE_BODY_1_3_OUTLINE_R, mode=Mode.SUBTRACT)
        with Locations((-43.633936399, 0)):
            Circle(MOVE_BODY_1_3_OUTLINE_R, mode=Mode.SUBTRACT)
        with Locations((-59.133936399, 7)):
            Circle(MOVE_BODY_1_3_OUTLINE_R_2, mode=Mode.SUBTRACT)
        with Locations((-66.883936399, 13.423393759)):
            Circle(MOVE_BODY_1_3_OUTLINE_R, mode=Mode.SUBTRACT)
    extrude(amount=MOVE_BODY_1_3_DEPTH)

    # Move Body 1 4 outline → Move Body 1 4 (cut)
    with BuildSketch(Plane.YZ.offset(MOVE_START_2)):
        with Locations((10.25, 16.1)):
            Rectangle(MOVE_BODY_1_4_OUTLINE_W, MOVE_BODY_1_4_OUTLINE_H)
    extrude(amount=MOVE_BODY_1_4_DEPTH, mode=Mode.SUBTRACT)

    # Move Body 1 5 outline → Move Body 1 5 (cut)
    with BuildSketch(Plane.YZ.offset(MOVE_START_3)):
        with Locations((13.87, 20.1)):
            Circle(MOVE_BODY_1_5_OUTLINE_R)
        with Locations((3.87, 20.1)):
            Circle(MOVE_BODY_1_5_OUTLINE_R)
        with Locations((3.87, 10.1)):
            Circle(MOVE_BODY_1_5_OUTLINE_R)
        with Locations((13.87, 10.1)):
            Circle(MOVE_BODY_1_5_OUTLINE_R)
    extrude(amount=MOVE_BODY_1_5_DEPTH, mode=Mode.SUBTRACT)

    # Move Body 1 6 outline → Move Body 1 6 (cut)
    with BuildSketch(Plane(origin=(0, 0, 0), x_dir=(1, 0, 0), z_dir=(0, 1, 0)).offset(MOVE_START_4)):
        with BuildLine():
            ThreePointArc((-29.5669682, -23.5), (-30.152754638, -24.914213563), (-31.5669682, -25.5))
            Line((-31.5669682, -25.5), (-20.27, -25.5))
            Line((-20.27, -25.5), (-20.27, -6.7))
            Line((-20.27, -6.7), (-29.566968204, -6.7))
            Line((-29.566968204, -6.7), (-29.5669682, -23.5))
        make_face()
    extrude(amount=MOVE_BODY_1_6_DEPTH, mode=Mode.SUBTRACT)

    # Move Body 1 7 outline → Move Body 1 7 (cut)
    with BuildSketch(Plane(origin=(0, 0, 0), x_dir=(1, 0, 0), z_dir=(0, 1, 0)).offset(MOVE_START_5)):
        with Locations((-37.5669682, -17.5)):
            Circle(MOVE_BODY_1_7_OUTLINE_R)
    extrude(amount=MOVE_BODY_1_7_DEPTH, mode=Mode.SUBTRACT)


solid = part.part
